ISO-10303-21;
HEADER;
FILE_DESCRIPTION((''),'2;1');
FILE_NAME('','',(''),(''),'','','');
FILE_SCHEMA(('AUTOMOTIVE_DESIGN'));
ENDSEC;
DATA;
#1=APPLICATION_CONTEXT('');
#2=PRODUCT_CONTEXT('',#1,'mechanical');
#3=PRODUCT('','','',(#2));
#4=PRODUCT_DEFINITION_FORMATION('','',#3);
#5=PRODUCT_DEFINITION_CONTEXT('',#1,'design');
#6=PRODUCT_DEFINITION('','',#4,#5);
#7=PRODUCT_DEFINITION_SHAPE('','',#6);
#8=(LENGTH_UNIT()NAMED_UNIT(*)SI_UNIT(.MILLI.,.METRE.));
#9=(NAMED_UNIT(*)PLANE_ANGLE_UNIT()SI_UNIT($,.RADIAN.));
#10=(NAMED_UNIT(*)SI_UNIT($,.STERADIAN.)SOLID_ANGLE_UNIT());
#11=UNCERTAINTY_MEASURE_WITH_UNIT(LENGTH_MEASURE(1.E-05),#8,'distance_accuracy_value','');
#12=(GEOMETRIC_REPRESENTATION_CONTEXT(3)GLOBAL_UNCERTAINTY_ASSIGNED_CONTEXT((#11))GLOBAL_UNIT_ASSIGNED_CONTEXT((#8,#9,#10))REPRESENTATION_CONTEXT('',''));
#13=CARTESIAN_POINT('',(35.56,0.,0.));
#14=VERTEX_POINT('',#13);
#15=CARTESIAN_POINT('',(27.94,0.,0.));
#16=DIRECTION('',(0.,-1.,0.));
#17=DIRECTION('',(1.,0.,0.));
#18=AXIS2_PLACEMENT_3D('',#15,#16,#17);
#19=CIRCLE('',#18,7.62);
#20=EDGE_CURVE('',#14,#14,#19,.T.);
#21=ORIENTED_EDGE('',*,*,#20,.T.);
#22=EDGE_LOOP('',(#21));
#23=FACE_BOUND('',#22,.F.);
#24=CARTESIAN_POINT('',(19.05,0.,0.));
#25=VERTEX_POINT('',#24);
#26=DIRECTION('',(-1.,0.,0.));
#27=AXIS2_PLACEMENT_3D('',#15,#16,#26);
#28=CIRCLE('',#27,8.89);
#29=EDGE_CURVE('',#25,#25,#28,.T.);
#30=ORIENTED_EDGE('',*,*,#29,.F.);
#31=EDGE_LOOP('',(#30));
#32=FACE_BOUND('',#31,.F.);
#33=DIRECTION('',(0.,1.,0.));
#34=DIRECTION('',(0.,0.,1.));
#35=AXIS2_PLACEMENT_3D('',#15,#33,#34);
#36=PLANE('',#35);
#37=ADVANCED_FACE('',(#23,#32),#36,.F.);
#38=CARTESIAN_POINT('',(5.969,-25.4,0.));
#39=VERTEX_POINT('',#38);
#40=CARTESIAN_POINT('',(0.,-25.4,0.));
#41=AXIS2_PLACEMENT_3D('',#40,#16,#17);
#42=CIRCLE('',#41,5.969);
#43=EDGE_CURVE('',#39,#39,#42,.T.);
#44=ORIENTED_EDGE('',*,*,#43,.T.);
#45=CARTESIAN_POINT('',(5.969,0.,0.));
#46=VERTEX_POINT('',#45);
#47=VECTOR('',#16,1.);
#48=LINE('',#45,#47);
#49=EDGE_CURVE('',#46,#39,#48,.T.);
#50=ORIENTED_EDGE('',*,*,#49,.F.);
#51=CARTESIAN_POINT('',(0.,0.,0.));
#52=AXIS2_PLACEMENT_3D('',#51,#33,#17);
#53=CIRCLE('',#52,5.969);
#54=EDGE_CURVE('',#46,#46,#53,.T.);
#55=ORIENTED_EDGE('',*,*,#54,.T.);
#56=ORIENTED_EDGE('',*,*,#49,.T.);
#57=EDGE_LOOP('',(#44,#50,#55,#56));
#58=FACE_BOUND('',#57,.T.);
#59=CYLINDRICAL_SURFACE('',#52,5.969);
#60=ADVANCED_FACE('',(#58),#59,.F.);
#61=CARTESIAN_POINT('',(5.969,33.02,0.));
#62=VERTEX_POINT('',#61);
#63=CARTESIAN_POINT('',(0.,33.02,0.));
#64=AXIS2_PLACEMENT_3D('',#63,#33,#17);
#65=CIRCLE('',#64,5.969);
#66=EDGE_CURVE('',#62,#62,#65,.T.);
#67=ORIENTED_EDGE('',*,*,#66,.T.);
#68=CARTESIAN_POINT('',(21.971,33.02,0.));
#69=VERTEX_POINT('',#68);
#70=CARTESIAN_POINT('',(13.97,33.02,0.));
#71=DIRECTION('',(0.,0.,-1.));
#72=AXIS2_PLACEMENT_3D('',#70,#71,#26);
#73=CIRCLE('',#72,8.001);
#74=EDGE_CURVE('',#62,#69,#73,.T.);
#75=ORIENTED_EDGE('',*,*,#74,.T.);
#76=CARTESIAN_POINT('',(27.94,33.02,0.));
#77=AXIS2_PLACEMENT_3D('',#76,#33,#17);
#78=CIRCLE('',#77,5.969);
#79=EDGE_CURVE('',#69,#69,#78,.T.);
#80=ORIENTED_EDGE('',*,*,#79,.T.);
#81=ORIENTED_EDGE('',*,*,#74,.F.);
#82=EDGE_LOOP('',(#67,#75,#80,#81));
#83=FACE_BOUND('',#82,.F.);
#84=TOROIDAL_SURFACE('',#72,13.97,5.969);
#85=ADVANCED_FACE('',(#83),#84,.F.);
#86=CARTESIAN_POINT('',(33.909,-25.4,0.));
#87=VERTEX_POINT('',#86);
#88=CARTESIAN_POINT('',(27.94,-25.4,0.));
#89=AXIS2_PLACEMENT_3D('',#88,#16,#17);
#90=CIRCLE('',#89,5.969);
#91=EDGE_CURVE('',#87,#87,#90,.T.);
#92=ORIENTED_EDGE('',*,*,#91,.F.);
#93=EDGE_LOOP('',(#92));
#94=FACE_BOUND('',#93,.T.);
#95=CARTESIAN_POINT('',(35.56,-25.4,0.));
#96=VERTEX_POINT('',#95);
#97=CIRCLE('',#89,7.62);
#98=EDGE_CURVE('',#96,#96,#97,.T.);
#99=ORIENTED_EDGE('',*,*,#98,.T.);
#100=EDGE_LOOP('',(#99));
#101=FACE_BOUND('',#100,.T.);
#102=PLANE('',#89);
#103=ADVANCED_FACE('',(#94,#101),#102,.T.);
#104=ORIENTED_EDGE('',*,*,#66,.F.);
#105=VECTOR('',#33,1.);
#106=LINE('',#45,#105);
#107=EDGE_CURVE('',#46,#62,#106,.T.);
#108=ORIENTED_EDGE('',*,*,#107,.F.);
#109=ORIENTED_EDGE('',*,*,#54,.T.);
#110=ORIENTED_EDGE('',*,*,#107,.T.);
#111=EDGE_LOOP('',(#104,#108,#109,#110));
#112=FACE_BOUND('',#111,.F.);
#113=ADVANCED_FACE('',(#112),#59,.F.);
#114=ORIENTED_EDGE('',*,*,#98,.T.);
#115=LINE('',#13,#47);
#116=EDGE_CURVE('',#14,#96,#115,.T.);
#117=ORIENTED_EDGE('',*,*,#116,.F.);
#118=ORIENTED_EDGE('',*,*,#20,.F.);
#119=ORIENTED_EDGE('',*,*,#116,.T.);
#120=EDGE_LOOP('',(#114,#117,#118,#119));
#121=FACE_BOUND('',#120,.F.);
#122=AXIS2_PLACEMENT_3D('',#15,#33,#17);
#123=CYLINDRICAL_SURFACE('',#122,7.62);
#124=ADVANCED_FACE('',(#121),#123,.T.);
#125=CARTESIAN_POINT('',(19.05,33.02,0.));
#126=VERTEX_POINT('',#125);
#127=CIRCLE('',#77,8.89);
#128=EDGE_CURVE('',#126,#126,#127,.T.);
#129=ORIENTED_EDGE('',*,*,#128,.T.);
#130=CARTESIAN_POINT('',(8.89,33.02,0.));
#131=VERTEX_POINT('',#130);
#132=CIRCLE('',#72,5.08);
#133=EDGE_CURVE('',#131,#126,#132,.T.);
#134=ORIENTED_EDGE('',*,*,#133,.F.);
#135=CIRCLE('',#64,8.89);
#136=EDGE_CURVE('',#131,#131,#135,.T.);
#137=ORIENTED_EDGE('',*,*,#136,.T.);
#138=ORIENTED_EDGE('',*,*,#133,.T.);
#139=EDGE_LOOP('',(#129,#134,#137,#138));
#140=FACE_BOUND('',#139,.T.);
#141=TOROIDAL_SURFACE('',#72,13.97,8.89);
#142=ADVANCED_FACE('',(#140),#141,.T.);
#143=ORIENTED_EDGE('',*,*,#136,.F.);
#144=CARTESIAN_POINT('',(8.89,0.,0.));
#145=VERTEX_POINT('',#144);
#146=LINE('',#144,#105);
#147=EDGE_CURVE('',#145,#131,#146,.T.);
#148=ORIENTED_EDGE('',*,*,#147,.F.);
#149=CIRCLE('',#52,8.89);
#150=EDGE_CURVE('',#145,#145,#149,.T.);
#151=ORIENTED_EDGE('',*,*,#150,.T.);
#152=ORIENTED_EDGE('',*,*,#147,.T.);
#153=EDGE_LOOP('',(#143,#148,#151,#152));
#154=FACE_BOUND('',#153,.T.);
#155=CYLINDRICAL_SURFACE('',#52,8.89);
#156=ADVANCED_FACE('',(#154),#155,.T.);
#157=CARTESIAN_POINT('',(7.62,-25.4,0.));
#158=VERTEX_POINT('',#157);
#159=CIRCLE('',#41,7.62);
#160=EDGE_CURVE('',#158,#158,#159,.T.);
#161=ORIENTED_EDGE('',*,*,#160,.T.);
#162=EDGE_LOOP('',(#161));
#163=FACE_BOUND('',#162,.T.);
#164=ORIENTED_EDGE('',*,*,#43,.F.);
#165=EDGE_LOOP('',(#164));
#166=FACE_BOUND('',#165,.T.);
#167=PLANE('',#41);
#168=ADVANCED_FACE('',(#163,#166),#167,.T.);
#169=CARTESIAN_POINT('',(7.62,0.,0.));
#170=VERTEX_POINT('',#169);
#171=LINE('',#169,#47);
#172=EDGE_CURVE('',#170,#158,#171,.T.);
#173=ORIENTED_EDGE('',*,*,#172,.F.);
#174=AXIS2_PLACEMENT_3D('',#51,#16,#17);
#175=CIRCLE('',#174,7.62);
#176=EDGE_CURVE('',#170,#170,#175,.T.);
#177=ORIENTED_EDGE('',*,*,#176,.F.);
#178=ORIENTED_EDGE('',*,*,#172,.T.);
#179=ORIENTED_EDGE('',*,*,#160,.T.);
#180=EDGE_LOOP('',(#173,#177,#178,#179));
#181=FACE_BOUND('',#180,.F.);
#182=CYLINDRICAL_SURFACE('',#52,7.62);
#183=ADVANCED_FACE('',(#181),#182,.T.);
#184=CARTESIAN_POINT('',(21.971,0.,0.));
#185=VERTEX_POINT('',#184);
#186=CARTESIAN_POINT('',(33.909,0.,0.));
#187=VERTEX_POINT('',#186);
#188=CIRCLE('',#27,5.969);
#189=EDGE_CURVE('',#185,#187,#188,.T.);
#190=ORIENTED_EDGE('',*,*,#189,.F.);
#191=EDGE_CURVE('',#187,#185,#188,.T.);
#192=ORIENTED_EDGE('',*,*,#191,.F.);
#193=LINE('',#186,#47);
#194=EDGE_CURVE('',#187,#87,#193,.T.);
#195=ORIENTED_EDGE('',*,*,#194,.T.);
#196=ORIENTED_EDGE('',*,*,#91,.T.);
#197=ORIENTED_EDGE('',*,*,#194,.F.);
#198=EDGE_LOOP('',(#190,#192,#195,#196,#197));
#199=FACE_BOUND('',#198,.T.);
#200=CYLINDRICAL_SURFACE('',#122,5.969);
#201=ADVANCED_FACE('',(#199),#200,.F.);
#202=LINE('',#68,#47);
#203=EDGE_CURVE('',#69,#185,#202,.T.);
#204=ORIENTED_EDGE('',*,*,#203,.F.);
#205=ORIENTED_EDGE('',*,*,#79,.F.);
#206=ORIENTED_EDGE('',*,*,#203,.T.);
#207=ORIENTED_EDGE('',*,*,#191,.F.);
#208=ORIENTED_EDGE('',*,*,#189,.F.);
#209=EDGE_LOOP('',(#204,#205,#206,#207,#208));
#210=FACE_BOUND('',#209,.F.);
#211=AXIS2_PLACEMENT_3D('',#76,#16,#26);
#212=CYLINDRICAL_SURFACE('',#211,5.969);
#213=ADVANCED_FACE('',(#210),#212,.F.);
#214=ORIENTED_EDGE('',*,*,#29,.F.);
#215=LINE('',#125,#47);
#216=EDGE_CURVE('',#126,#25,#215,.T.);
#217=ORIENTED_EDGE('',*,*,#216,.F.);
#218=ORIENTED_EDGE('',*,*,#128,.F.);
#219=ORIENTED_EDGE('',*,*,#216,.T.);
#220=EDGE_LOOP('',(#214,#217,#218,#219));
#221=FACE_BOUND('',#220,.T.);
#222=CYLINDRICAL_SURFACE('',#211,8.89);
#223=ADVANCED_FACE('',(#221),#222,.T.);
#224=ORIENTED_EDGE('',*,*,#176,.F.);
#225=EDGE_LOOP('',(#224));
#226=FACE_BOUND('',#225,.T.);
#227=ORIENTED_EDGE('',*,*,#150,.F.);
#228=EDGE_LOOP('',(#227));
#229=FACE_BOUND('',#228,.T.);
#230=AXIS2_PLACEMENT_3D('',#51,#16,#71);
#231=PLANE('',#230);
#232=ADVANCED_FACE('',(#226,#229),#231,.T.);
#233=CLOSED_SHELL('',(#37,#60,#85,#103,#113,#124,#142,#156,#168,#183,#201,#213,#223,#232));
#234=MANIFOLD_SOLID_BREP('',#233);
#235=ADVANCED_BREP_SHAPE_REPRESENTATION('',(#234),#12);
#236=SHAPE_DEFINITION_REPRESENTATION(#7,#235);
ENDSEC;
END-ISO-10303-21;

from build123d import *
from build123d import SkipClean  # not in build123d's __all__

# Parameters (mm, degrees)
F0_R     = 8.89
F0_R_2   = 5.969
F3_R     = 7.62
F3_R_2   = 5.969
F4_R     = 7.62
F4_R_2   = 5.969
F5_DEPTH = 25.4


with BuildPart() as f2:
    # F2: sweep along a path in F1
    with BuildLine(Plane.XY) as f2_path:
        Line((0, 0), (0, 33.02))
        ThreePointArc((0, 33.02), (13.97, 46.99), (27.94, 33.02))
        Line((27.94, 33.02), (27.94, 0))
    # F0 (on Front) → F2 (sweep)
    with BuildSketch(Plane.XZ):
        Circle(F0_R)
        Circle(F0_R_2, mode=Mode.SUBTRACT)
    sweep(path=f2_path.line)

    # F3 (on face) + F4 (on face) → F5 (join)
    with BuildSketch(Plane.XZ):
        Circle(F3_R)
        Circle(F3_R_2, mode=Mode.SUBTRACT)
    with BuildSketch(Plane.XZ):
        with Locations((27.94, 0)):
            Circle(F4_R)
        with Locations((27.94, 0)):
            Circle(F4_R_2, mode=Mode.SUBTRACT)
    with SkipClean():  # cleaning this boolean's faces spoils the solid; the shape is the same uncleaned
        extrude(amount=F5_DEPTH)


solid = f2.part
